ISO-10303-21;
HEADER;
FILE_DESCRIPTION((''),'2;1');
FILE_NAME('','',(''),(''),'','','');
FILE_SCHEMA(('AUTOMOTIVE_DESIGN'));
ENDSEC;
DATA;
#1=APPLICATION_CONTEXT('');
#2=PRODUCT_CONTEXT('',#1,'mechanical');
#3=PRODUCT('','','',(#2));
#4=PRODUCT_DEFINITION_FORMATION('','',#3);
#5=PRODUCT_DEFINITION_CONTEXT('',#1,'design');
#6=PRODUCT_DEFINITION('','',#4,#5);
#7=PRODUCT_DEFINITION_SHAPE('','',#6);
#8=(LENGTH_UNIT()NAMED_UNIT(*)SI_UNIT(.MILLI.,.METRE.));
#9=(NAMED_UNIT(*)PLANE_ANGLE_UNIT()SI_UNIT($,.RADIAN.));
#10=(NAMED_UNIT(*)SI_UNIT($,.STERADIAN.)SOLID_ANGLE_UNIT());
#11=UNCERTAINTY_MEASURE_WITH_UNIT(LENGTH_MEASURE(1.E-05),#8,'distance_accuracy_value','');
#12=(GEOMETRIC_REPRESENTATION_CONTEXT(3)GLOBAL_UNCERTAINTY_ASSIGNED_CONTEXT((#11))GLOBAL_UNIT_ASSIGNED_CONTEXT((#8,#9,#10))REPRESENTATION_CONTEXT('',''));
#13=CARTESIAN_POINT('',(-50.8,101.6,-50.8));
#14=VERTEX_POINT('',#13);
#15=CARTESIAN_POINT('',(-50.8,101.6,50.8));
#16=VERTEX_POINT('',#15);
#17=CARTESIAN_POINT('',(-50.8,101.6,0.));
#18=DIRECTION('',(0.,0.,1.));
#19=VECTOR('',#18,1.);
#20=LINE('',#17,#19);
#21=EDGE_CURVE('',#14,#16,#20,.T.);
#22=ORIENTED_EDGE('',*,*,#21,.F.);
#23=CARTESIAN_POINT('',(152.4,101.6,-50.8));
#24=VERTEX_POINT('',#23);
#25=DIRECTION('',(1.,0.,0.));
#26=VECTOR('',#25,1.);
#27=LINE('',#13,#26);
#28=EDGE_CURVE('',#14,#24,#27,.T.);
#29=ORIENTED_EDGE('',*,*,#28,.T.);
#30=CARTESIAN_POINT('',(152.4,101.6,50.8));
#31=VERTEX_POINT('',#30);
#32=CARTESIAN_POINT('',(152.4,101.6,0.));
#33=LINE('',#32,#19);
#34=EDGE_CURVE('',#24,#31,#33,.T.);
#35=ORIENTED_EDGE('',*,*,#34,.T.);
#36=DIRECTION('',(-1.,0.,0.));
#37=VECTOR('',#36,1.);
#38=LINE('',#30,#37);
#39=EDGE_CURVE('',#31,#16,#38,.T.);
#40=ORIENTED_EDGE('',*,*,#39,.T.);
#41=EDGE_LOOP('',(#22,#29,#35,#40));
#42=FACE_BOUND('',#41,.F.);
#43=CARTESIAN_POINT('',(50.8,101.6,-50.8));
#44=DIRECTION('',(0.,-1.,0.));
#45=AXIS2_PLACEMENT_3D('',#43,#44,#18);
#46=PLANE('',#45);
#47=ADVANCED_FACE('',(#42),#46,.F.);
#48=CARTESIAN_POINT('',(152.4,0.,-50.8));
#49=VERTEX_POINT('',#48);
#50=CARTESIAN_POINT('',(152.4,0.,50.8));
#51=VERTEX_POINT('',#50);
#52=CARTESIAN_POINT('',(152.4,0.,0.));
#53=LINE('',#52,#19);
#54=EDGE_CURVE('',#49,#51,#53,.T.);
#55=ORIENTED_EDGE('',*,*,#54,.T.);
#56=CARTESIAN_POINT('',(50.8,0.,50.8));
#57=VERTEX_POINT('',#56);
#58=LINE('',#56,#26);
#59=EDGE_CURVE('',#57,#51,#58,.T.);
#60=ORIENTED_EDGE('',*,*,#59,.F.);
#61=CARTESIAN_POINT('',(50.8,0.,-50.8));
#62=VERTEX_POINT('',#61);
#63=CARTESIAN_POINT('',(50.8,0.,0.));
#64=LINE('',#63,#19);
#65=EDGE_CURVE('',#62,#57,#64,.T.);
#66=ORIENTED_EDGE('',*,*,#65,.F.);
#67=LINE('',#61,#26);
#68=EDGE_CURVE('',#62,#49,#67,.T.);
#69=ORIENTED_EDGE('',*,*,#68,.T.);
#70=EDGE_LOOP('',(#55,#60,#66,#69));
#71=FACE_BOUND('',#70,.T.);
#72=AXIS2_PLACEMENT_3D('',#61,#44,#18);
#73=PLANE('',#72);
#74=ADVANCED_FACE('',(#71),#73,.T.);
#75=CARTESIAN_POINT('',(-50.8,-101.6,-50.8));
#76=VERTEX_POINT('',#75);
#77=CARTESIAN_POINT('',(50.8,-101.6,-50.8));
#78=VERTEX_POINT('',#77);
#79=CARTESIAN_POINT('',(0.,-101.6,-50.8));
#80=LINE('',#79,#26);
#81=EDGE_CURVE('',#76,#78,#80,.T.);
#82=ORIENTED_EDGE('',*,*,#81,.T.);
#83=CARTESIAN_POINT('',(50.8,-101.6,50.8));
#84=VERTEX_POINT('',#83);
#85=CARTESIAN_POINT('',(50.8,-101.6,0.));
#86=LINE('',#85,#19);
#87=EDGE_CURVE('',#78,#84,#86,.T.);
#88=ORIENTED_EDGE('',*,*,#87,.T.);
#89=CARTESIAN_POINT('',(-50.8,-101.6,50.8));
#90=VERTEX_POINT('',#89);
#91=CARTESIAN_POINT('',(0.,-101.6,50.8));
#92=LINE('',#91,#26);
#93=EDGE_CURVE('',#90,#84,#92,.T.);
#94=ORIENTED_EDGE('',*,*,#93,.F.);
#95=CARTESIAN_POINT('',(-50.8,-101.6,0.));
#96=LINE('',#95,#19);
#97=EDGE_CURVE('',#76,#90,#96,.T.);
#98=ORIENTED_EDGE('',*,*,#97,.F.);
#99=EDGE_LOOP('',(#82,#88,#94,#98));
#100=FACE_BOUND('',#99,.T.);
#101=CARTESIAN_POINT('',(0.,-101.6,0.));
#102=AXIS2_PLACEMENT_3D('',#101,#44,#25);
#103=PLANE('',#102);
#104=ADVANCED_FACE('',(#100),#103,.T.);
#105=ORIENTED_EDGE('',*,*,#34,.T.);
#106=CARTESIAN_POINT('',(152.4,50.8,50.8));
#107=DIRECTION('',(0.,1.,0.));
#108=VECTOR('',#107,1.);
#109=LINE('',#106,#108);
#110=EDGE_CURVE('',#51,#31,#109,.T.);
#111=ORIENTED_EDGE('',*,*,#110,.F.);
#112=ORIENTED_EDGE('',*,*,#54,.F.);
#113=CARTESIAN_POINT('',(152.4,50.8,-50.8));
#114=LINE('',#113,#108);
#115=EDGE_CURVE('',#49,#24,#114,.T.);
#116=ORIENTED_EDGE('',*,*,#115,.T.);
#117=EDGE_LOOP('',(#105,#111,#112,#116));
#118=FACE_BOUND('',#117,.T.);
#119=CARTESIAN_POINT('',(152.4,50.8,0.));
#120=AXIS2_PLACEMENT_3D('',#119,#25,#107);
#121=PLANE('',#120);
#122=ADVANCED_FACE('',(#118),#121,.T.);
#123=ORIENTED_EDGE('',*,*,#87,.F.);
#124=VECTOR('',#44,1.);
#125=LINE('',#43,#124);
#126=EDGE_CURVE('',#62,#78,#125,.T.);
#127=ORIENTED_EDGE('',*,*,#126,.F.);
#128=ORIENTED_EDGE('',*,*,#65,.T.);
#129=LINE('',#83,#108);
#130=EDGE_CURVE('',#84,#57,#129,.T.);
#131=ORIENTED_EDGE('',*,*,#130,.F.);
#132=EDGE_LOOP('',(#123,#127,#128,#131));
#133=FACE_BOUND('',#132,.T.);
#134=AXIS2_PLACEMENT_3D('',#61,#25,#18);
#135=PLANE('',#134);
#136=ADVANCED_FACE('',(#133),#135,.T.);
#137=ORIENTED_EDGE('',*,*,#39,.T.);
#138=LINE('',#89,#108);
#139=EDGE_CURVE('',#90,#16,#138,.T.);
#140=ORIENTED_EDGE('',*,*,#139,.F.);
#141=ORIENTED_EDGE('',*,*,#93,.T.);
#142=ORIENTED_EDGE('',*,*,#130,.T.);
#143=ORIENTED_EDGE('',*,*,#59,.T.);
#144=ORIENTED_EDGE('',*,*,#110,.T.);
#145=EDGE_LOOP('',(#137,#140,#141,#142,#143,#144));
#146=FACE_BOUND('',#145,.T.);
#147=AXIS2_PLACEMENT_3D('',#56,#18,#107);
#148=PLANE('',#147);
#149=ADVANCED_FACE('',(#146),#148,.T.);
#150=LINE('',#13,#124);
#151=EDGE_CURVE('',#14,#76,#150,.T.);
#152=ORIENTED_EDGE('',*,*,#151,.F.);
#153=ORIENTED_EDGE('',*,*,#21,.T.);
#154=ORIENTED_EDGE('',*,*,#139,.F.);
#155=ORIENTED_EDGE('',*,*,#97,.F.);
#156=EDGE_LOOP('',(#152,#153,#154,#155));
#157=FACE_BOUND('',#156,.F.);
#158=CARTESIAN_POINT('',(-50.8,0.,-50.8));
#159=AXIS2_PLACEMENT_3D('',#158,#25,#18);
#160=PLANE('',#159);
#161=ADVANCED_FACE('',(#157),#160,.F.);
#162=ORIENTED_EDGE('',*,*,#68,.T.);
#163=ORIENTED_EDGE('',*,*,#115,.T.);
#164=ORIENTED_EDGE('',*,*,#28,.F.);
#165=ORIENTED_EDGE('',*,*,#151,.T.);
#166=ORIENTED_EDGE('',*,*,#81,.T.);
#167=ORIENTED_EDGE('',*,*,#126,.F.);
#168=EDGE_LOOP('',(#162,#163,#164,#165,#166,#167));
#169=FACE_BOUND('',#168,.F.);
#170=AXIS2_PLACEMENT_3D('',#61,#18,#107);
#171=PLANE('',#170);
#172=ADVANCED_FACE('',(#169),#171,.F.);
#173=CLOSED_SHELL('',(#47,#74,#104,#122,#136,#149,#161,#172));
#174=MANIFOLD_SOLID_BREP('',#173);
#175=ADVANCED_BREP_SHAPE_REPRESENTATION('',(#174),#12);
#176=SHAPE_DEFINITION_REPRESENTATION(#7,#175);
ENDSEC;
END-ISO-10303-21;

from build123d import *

# Parameters (mm, degrees)
F1_W     = 101.6
F1_H     = 101.6
F2_DEPTH = 101.6
F3_W     = 101.6
F3_H     = 101.6
F4_DEPTH = 101.6


# Not quite as in the source:
# - a variable given as a bare number and used for a length is read in inches; the dataset says mm whatever the document's units were


with BuildPart() as f2:
    # F1 (on Front) → F2 (new body, symmetric)
    with BuildSketch(Plane.XZ):
        Rectangle(F1_W, F1_H)
    extrude(amount=F2_DEPTH, both=True)

    # F3 (on face) → F4 (join)
    with BuildSketch(Plane.YZ.offset(50.8)):
        with Locations((50.8, 0)):
            Rectangle(F3_W, F3_H)
    extrude(amount=F4_DEPTH)


solid = f2.part
